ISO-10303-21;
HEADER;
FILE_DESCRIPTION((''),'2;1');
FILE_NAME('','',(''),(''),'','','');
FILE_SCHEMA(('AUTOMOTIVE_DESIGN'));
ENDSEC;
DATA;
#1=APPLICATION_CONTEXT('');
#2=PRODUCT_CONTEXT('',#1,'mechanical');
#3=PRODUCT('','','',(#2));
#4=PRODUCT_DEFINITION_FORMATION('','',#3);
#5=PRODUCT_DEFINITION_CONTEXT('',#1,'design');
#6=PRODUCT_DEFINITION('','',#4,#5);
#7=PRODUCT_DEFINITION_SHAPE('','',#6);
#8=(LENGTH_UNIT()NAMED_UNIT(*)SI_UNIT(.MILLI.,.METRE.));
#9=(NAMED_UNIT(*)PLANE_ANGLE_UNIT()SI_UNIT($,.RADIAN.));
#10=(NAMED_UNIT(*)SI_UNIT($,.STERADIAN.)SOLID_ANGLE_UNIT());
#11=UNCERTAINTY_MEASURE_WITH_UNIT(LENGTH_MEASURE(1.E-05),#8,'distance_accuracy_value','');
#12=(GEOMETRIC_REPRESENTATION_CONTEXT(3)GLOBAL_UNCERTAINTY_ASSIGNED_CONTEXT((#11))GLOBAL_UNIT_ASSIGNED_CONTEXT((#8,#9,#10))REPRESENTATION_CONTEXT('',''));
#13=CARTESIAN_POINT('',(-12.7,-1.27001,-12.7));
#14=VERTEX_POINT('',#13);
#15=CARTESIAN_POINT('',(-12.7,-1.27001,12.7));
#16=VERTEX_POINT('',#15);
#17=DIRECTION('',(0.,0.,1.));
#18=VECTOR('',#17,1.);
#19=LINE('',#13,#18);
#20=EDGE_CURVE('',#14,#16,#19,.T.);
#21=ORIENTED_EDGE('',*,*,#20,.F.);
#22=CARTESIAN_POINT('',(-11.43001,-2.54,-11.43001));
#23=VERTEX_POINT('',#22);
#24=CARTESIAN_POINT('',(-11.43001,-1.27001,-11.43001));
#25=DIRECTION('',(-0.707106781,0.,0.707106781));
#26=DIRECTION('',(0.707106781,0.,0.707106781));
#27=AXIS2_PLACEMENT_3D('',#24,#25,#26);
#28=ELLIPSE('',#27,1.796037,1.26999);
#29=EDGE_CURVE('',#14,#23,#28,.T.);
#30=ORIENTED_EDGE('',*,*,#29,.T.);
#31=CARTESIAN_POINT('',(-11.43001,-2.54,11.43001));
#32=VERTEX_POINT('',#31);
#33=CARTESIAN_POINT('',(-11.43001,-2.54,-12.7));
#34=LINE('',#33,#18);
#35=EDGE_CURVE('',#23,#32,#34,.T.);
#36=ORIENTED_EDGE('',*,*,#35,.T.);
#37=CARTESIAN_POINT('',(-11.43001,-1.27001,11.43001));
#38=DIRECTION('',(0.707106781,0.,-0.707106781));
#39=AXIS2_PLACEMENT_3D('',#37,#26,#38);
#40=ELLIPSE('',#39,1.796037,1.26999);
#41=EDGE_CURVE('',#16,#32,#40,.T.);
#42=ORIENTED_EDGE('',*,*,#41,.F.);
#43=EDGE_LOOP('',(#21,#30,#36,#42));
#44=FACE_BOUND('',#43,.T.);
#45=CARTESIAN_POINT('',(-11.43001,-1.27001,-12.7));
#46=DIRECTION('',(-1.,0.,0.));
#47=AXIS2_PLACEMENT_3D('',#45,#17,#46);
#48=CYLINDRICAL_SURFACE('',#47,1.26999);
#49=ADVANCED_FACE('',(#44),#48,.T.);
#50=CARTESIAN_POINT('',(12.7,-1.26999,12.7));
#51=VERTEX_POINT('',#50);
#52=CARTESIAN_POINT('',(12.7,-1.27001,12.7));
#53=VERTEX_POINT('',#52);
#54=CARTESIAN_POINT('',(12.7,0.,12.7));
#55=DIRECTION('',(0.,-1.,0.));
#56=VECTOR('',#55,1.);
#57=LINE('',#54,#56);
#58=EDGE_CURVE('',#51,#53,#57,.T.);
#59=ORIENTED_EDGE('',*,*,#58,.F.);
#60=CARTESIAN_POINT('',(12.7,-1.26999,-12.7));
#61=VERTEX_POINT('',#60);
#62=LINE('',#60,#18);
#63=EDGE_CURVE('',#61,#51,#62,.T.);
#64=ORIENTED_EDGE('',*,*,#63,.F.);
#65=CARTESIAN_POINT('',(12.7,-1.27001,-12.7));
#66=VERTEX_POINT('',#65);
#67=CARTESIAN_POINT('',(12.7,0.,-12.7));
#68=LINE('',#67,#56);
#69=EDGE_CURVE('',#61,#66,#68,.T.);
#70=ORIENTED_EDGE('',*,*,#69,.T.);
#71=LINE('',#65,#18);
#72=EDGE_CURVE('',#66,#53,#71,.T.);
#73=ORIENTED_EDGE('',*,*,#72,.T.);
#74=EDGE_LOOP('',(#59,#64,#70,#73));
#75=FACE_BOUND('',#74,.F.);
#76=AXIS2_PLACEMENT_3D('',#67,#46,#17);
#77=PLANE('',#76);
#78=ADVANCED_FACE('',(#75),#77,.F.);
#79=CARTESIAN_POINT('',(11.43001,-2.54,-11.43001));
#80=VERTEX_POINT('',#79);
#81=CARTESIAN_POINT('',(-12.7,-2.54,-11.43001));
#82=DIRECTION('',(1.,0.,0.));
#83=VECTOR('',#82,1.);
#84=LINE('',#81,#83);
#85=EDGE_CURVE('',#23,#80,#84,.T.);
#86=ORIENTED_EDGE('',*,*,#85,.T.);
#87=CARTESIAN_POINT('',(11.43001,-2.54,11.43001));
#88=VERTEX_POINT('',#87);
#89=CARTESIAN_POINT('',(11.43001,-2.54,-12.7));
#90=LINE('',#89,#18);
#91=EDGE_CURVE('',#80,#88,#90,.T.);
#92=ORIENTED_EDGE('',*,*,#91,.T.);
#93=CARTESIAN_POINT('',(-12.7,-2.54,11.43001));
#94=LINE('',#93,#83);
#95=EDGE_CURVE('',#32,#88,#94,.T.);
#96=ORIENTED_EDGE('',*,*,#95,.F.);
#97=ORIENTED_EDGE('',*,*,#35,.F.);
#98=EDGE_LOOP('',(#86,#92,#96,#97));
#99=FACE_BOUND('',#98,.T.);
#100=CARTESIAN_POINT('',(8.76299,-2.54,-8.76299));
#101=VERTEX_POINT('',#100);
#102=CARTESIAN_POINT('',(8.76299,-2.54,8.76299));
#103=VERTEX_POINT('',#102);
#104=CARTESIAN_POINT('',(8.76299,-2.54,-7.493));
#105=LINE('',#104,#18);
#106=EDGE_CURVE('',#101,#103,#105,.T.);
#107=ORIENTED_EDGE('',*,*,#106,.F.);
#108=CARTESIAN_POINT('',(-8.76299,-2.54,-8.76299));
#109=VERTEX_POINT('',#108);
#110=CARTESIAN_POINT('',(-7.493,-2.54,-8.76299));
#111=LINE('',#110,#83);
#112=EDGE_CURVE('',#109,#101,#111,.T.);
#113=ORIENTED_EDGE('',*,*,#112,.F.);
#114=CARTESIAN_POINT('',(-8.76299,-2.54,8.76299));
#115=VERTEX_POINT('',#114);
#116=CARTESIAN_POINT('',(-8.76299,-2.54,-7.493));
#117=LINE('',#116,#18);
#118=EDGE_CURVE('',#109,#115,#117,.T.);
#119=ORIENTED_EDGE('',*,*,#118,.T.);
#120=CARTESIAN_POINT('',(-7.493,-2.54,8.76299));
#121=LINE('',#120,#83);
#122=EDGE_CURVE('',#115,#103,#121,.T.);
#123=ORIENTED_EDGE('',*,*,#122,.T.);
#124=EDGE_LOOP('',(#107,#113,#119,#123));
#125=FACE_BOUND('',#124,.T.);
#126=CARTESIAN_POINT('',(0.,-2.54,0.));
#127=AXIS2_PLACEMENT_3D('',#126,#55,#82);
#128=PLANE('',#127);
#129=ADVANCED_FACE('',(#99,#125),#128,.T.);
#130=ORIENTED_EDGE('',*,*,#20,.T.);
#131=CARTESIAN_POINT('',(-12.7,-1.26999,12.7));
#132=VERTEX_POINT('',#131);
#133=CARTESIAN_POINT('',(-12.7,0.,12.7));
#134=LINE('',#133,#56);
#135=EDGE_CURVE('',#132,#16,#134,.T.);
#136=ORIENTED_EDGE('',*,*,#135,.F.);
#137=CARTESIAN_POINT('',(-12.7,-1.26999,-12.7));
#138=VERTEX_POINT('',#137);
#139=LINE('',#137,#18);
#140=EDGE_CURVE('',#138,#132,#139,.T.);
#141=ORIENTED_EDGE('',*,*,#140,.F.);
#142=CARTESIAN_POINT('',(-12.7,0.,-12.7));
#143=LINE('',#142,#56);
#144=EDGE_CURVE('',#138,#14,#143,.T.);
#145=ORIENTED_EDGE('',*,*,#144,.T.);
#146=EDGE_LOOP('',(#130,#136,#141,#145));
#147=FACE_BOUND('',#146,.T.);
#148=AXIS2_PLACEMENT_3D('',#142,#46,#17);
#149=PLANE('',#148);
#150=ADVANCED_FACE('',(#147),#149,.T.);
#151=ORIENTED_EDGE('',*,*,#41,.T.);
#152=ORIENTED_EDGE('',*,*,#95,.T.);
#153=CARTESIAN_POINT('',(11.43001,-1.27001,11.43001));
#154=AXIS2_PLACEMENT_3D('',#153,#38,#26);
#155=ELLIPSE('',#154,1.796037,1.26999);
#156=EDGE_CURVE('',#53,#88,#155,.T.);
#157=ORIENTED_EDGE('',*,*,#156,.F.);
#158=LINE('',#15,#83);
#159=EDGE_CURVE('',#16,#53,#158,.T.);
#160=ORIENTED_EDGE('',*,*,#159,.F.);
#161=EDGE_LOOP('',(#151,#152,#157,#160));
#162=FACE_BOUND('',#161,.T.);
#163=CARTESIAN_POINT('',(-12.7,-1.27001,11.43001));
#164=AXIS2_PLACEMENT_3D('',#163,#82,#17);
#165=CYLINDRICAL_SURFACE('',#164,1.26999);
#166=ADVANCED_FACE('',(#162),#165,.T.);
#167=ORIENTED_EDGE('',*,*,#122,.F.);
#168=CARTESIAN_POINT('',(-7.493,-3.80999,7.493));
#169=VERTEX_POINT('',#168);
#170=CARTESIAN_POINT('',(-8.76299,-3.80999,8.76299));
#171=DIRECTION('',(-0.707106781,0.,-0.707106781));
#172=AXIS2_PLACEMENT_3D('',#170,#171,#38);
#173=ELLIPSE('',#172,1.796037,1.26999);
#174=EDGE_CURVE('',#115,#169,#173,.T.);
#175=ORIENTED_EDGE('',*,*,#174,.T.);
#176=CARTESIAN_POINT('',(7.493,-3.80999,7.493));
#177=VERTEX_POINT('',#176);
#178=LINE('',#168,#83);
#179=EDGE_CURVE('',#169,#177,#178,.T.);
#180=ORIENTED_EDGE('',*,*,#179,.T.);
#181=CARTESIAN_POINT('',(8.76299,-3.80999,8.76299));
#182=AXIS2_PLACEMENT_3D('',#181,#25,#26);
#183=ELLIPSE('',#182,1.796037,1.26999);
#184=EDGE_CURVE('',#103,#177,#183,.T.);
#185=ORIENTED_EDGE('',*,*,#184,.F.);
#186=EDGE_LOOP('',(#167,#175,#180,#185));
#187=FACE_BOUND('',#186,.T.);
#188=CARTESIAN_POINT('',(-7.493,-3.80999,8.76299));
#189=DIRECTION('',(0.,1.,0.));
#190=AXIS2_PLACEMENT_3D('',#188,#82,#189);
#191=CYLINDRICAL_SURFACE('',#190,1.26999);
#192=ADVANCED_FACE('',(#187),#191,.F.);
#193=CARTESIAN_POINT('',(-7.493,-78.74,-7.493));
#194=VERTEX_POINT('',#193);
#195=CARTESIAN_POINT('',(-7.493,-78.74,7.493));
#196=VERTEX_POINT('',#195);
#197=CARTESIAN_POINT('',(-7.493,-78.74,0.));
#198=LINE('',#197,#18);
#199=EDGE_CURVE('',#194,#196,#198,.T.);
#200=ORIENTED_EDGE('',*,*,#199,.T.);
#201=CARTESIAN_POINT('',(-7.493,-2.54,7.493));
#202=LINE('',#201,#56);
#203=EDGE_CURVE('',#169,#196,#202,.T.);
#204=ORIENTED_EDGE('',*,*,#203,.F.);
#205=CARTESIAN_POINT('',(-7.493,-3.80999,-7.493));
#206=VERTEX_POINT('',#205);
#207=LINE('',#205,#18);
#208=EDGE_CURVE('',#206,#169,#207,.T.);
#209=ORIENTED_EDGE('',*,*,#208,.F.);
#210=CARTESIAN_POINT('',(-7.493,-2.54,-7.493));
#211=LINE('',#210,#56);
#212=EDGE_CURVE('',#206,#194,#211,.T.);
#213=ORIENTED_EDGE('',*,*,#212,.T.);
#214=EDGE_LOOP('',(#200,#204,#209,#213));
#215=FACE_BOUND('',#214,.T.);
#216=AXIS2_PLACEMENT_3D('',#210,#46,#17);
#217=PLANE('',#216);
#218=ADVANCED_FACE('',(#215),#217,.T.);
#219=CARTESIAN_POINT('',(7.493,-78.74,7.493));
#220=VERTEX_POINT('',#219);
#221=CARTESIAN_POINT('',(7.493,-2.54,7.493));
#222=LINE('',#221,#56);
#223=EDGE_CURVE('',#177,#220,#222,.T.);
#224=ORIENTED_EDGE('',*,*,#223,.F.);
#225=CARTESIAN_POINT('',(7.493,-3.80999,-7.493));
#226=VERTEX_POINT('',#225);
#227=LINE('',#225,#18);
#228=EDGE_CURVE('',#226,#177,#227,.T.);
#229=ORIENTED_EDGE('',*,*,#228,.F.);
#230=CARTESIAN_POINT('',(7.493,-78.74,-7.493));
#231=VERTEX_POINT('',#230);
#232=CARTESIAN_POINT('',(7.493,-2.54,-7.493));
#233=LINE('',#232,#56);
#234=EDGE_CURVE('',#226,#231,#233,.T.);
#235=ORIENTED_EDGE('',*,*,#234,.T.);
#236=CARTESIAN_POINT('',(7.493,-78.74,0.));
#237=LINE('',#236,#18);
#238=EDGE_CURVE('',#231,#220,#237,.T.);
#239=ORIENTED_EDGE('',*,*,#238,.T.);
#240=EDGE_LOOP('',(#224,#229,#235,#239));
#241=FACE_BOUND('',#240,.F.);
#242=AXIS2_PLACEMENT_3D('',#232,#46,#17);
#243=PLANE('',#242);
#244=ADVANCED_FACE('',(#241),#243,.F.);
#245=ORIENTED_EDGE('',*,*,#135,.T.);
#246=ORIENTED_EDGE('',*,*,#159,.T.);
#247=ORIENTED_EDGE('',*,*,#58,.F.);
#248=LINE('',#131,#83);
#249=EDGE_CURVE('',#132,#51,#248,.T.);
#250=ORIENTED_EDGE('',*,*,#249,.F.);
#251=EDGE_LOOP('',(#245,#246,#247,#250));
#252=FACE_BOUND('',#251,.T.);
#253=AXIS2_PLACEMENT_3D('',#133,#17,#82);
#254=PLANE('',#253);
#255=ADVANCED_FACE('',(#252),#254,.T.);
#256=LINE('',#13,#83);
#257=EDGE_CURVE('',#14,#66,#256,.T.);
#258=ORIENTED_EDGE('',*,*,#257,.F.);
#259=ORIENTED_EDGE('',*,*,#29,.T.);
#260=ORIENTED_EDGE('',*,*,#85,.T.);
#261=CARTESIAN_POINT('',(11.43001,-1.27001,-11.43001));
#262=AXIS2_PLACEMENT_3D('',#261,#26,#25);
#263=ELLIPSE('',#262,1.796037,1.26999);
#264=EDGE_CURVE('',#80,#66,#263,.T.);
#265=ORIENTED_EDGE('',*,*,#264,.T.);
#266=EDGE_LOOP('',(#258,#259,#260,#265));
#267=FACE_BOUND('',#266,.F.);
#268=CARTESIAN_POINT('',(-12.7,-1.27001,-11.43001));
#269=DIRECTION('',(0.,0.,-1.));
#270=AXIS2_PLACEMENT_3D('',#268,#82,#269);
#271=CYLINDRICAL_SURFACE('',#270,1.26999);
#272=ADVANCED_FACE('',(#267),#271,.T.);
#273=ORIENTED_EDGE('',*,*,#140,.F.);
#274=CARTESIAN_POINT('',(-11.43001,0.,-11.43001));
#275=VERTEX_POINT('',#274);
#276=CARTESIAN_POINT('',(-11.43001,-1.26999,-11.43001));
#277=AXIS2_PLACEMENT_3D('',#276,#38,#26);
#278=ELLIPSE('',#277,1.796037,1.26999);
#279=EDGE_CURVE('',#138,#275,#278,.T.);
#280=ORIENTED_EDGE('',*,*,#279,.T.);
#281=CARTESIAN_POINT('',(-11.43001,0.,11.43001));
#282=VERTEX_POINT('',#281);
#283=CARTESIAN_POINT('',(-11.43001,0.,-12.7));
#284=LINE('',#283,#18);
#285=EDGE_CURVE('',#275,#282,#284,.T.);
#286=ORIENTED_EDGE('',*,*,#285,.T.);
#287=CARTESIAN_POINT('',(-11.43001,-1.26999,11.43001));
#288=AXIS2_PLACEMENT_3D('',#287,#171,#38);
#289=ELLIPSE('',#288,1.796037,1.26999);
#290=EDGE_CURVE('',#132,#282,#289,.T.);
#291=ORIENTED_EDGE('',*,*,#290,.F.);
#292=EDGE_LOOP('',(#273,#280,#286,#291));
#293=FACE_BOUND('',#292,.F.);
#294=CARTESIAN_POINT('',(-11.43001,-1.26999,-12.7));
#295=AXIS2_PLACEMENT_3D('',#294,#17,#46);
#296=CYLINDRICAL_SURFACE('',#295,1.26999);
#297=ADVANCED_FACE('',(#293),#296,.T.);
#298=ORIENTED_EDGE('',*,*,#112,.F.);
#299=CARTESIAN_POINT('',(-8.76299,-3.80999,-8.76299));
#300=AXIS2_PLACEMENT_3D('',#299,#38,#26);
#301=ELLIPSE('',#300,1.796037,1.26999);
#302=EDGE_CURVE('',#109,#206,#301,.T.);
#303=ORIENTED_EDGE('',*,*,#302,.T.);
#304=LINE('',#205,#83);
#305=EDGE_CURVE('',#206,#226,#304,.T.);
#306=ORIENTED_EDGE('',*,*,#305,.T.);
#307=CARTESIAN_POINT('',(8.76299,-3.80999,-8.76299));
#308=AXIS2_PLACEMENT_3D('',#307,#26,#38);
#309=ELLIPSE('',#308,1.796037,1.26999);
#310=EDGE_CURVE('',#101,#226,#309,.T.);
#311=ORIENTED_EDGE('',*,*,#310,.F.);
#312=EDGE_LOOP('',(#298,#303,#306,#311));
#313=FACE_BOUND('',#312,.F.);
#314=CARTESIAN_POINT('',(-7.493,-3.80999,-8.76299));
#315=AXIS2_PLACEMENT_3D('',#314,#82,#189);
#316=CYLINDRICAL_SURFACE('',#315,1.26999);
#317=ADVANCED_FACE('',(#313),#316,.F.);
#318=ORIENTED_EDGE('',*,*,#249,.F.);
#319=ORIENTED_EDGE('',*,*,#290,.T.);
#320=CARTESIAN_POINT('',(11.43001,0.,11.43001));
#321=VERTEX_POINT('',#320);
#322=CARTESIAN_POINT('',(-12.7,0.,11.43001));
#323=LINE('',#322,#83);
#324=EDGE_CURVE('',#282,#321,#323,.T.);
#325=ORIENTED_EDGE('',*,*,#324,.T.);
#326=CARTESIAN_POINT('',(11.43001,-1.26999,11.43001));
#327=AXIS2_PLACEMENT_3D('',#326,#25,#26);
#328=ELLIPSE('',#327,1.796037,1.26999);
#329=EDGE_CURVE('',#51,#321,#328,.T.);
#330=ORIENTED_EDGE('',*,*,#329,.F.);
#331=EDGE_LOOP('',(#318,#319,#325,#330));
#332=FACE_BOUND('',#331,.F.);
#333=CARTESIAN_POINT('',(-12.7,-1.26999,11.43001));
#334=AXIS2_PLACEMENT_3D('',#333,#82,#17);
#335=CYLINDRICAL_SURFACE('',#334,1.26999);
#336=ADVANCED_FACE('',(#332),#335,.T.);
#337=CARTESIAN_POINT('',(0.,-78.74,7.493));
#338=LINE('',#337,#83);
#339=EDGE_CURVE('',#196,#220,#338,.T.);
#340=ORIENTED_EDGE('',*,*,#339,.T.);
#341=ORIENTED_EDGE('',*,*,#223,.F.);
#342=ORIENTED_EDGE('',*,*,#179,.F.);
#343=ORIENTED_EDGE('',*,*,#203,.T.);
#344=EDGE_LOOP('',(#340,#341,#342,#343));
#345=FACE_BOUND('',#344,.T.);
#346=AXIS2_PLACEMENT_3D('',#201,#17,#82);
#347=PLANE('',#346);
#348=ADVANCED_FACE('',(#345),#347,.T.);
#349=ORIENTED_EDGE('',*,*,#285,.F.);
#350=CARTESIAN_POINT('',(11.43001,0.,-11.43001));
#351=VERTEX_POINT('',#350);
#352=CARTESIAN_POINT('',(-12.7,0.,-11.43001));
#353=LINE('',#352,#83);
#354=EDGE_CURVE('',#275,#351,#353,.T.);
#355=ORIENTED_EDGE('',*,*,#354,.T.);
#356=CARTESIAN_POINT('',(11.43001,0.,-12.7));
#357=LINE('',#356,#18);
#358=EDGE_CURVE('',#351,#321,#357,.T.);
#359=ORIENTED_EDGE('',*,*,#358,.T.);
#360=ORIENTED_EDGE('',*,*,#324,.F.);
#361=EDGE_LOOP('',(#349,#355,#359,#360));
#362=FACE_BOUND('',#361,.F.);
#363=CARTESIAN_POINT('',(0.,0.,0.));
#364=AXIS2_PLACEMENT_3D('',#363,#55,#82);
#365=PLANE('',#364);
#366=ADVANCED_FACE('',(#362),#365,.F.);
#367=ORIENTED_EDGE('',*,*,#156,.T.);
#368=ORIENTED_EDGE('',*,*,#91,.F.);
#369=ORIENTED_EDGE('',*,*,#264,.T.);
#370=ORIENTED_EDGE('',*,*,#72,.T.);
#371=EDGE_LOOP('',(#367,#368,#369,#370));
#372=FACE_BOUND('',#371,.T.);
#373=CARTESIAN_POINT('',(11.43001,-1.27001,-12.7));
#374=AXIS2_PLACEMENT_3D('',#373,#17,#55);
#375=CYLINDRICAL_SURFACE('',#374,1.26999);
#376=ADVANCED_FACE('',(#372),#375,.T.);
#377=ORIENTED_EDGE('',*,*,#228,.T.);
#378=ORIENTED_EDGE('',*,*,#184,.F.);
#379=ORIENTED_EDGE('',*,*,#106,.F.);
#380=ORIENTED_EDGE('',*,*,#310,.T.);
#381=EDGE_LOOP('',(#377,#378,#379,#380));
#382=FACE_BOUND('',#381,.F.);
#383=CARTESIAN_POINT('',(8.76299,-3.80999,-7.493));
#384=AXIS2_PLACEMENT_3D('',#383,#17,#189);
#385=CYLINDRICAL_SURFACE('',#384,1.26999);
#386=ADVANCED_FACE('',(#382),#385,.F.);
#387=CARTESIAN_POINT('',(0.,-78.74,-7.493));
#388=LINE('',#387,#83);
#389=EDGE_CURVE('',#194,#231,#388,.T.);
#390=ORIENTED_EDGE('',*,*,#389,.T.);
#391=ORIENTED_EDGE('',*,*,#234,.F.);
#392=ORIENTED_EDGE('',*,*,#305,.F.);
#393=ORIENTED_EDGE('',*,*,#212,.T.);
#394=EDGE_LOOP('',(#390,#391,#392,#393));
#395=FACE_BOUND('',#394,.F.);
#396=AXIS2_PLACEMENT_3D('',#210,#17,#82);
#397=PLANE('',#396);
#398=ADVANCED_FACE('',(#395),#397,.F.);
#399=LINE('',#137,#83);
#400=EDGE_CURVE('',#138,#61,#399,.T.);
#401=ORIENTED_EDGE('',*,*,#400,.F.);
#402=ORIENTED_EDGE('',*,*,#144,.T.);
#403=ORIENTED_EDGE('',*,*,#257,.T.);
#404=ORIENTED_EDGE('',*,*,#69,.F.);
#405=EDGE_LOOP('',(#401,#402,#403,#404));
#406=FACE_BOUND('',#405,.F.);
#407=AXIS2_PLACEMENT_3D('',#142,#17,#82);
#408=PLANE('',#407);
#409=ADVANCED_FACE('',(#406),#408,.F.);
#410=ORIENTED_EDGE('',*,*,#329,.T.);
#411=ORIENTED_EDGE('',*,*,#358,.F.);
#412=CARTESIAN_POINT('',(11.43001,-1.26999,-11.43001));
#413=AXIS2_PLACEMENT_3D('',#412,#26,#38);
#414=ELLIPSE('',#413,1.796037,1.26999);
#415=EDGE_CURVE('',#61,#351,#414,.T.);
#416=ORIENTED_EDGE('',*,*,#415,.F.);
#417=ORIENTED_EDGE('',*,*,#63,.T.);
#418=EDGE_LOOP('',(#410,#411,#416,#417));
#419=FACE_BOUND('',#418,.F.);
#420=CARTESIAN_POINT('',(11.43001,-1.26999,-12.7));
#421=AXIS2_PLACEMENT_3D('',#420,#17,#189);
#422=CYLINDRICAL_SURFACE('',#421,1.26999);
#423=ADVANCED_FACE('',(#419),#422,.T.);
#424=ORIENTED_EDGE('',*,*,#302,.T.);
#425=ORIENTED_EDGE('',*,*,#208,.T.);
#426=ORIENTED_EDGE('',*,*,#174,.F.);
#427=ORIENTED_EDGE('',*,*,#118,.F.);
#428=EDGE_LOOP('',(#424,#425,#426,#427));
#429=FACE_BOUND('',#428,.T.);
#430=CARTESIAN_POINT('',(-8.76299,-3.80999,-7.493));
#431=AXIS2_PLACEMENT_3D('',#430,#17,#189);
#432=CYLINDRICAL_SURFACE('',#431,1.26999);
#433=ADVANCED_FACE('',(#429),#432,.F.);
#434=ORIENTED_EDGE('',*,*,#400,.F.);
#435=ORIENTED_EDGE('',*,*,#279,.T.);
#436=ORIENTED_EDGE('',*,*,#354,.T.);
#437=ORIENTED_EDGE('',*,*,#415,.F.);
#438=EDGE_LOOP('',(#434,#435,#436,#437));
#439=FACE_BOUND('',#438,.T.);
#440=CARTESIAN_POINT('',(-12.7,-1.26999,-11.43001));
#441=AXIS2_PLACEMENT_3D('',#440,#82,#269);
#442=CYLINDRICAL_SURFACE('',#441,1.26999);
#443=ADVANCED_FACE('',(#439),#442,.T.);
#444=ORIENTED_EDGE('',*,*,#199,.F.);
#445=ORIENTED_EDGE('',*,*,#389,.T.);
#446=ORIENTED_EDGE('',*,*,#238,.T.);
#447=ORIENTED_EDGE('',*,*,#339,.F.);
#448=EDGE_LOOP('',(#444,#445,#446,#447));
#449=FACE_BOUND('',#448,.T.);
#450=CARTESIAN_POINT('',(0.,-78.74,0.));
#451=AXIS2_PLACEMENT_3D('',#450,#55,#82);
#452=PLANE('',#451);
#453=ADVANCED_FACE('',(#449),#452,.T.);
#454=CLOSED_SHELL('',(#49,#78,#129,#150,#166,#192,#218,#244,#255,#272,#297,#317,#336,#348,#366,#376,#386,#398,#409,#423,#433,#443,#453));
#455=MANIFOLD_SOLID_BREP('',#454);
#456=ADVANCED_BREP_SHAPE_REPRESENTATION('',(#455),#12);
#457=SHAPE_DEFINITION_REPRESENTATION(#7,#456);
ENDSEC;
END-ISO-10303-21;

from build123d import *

# Parameters (mm, degrees)
F0_W     = 25.4
F0_H     = 25.4
F1_DEPTH = 2.54
F2_W     = 14.986
F2_H     = 14.986
F3_DEPTH = 76.2
F4_R     = 1.26999


# Not quite as in the source:
# - a fillet or chamfer is up to 0.001 mm smaller than in the source, because OpenCascade refuses the exact size


with BuildPart() as f1:
    # F0 (on Front) → F1 (new body)
    with BuildSketch(Plane.XZ):
        Rectangle(F0_W, F0_H)
    extrude(amount=F1_DEPTH)

    # F2 (on face) → F3 (join)
    with BuildSketch(Plane.XZ.offset(2.54)):
        Rectangle(F2_W, F2_H)
    extrude(amount=F3_DEPTH)

    # F4 (radius 1.27 in the source; OpenCascade refuses exactly that, so slightly less here)
    f4_edges = [f1.edges().sort_by_distance(p)[0] for p in [
        (0, 0, 12.7),
        (-12.7, 0, 0),
        (0, 0, -12.7),
        (12.7, 0, 0),
        (0, -2.54, 12.7),
        (12.7, -2.54, 0),
        (-12.7, -2.54, 0),
        (0, -2.54, -12.7),
        (0, -2.54, 7.493),
        (-7.493, -2.54, 0),
        (0, -2.54, -7.493),
        (7.493, -2.54, 0),
    ]]
    fillet(f4_edges, radius=F4_R)


solid = f1.part
